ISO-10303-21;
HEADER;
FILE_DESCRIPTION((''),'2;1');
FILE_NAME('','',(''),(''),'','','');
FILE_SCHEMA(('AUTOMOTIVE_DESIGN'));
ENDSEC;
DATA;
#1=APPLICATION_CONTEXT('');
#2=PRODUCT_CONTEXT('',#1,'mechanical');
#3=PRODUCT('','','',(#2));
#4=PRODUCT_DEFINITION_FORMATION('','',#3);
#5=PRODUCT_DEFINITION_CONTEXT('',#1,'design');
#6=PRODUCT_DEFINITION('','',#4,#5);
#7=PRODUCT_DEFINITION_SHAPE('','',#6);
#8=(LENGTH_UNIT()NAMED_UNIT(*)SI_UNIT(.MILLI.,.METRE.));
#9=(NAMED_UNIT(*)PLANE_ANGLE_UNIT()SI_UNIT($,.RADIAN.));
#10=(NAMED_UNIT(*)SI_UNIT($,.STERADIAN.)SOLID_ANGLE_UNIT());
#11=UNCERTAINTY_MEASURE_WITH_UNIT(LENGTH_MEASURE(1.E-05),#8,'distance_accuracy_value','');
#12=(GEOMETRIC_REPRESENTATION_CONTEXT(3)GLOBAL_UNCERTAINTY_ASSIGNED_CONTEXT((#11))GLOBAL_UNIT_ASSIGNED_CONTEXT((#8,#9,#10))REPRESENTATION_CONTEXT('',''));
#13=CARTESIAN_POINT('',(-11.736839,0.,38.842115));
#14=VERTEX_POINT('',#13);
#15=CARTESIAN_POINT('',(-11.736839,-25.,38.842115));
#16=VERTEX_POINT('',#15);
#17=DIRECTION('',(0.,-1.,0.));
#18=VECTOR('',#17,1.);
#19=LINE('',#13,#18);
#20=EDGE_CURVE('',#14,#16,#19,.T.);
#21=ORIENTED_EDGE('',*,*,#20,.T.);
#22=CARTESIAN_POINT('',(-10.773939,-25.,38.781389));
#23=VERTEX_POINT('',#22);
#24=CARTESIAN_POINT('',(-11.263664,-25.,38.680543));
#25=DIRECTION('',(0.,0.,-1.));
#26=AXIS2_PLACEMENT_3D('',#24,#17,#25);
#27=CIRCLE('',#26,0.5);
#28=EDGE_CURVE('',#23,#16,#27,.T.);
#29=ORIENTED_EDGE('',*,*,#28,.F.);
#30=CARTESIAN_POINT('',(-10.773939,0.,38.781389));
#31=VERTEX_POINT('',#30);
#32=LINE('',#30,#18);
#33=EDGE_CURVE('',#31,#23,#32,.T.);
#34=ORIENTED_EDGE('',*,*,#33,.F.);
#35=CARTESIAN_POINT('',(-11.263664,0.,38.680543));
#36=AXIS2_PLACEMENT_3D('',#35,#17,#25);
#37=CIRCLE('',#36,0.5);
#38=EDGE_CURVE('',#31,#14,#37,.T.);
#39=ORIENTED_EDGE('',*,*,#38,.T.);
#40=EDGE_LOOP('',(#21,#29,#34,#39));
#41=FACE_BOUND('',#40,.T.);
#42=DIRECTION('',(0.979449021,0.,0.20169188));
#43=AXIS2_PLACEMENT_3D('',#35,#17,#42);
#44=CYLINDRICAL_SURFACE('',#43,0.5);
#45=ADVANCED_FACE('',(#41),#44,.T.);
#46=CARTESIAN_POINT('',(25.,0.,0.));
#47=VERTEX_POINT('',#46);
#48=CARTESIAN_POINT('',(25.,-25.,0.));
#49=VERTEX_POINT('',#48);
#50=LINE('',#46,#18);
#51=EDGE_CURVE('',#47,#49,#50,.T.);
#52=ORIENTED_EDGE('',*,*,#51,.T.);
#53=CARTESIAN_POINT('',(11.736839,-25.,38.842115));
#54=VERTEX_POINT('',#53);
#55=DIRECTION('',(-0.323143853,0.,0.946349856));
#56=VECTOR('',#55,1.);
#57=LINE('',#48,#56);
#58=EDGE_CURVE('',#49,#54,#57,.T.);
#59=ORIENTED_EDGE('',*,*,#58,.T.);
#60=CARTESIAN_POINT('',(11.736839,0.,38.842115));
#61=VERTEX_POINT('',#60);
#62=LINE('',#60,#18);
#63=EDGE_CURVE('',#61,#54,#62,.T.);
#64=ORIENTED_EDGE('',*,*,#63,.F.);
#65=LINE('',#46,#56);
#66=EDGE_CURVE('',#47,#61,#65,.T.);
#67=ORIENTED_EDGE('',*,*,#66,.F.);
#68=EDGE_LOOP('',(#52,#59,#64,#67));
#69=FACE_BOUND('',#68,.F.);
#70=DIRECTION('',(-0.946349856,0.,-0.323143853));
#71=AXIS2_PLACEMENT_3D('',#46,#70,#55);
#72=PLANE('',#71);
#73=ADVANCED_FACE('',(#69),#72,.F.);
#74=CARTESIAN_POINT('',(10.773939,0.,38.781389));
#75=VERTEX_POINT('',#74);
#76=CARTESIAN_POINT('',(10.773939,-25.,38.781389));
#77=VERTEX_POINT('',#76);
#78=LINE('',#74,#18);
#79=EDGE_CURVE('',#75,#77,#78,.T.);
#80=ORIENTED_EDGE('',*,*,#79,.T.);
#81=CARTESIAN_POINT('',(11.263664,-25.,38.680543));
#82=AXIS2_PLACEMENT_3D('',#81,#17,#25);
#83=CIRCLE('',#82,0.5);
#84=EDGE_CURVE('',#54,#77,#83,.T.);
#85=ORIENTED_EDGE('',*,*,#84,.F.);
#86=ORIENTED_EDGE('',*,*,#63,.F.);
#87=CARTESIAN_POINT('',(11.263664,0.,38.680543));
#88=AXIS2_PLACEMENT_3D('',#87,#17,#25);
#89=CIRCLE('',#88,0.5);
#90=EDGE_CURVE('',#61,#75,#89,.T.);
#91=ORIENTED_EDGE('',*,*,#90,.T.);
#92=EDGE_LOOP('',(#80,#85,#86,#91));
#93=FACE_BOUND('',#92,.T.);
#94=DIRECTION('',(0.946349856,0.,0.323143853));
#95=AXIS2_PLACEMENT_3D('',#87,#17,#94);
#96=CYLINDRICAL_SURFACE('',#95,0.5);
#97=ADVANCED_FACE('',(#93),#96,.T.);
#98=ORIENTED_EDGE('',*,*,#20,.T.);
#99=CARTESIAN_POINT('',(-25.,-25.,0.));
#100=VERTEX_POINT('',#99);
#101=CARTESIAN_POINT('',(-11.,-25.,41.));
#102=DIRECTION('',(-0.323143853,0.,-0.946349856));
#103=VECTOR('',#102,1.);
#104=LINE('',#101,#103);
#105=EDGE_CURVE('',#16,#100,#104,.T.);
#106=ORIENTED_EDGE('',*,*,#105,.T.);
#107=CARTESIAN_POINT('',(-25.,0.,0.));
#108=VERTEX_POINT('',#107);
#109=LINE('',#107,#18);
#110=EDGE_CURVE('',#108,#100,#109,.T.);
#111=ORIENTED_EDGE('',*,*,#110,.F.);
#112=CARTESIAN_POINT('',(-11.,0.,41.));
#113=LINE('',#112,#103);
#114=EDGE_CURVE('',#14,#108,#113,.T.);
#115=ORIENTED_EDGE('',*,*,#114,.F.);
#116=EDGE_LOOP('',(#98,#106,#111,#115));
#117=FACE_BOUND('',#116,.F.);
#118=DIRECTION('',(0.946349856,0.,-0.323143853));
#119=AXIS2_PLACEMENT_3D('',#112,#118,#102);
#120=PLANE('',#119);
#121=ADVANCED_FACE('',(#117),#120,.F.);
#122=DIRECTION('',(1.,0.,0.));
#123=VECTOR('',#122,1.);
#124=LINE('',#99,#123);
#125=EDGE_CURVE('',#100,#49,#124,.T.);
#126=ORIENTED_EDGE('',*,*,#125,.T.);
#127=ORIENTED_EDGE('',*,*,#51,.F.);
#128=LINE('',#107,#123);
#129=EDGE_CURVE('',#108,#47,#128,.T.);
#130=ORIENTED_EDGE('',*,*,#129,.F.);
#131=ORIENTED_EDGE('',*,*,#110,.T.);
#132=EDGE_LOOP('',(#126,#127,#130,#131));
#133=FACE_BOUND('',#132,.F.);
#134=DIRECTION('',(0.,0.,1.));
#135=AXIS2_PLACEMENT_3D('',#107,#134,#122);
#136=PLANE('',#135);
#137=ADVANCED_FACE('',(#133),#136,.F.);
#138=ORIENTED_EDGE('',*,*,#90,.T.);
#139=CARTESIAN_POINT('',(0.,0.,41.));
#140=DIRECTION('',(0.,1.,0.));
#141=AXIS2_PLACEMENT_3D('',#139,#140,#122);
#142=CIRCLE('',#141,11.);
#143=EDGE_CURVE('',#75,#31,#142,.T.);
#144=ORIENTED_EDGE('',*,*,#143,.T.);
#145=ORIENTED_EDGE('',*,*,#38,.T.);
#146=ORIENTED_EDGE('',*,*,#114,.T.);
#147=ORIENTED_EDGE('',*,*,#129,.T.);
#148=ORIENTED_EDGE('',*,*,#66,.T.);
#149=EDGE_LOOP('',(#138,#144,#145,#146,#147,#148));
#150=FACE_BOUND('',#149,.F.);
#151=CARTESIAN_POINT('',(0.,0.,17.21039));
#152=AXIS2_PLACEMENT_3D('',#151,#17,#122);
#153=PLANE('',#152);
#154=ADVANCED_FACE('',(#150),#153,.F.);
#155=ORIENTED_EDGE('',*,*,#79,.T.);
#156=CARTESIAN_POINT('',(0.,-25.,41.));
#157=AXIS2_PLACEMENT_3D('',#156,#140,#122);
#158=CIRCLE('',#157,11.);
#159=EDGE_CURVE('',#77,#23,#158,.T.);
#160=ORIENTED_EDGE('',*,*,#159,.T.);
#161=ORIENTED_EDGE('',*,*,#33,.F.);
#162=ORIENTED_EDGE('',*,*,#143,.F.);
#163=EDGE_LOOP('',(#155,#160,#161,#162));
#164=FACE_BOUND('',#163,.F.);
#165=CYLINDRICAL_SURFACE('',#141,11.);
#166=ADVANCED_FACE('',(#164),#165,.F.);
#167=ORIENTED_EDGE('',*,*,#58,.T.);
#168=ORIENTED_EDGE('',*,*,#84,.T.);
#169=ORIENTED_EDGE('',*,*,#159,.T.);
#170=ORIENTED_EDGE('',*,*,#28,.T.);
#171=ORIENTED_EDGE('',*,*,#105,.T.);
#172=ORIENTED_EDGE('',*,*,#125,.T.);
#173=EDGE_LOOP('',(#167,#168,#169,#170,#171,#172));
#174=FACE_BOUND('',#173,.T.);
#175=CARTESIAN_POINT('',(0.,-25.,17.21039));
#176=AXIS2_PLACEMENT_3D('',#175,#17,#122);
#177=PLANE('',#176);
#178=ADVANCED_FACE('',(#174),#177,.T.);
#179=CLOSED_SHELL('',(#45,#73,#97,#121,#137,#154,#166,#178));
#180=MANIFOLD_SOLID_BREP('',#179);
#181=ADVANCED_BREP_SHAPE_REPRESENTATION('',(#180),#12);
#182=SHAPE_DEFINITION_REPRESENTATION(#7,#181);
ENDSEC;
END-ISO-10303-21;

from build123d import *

# Parameters (mm, degrees)
F1_DEPTH = 25
F2_R     = 0.5


with BuildPart() as f1:
    # F0 (on Front) → F1 (new body)
    with BuildSketch(Plane.XZ):
        with BuildLine():
            Line((25, 0), (11, 41))
            ThreePointArc((11, 41), (0, 30), (-11, 41))
            Line((-11, 41), (-25, 0))
            Line((-25, 0), (25, 0))
        make_face()
    extrude(amount=F1_DEPTH)

    # F2
    f2_edges = [f1.edges().sort_by_distance(p)[0] for p in [
        (-11, -12.5, 41),
        (11, -12.5, 41),
    ]]
    fillet(f2_edges, radius=F2_R)


solid = f1.part
